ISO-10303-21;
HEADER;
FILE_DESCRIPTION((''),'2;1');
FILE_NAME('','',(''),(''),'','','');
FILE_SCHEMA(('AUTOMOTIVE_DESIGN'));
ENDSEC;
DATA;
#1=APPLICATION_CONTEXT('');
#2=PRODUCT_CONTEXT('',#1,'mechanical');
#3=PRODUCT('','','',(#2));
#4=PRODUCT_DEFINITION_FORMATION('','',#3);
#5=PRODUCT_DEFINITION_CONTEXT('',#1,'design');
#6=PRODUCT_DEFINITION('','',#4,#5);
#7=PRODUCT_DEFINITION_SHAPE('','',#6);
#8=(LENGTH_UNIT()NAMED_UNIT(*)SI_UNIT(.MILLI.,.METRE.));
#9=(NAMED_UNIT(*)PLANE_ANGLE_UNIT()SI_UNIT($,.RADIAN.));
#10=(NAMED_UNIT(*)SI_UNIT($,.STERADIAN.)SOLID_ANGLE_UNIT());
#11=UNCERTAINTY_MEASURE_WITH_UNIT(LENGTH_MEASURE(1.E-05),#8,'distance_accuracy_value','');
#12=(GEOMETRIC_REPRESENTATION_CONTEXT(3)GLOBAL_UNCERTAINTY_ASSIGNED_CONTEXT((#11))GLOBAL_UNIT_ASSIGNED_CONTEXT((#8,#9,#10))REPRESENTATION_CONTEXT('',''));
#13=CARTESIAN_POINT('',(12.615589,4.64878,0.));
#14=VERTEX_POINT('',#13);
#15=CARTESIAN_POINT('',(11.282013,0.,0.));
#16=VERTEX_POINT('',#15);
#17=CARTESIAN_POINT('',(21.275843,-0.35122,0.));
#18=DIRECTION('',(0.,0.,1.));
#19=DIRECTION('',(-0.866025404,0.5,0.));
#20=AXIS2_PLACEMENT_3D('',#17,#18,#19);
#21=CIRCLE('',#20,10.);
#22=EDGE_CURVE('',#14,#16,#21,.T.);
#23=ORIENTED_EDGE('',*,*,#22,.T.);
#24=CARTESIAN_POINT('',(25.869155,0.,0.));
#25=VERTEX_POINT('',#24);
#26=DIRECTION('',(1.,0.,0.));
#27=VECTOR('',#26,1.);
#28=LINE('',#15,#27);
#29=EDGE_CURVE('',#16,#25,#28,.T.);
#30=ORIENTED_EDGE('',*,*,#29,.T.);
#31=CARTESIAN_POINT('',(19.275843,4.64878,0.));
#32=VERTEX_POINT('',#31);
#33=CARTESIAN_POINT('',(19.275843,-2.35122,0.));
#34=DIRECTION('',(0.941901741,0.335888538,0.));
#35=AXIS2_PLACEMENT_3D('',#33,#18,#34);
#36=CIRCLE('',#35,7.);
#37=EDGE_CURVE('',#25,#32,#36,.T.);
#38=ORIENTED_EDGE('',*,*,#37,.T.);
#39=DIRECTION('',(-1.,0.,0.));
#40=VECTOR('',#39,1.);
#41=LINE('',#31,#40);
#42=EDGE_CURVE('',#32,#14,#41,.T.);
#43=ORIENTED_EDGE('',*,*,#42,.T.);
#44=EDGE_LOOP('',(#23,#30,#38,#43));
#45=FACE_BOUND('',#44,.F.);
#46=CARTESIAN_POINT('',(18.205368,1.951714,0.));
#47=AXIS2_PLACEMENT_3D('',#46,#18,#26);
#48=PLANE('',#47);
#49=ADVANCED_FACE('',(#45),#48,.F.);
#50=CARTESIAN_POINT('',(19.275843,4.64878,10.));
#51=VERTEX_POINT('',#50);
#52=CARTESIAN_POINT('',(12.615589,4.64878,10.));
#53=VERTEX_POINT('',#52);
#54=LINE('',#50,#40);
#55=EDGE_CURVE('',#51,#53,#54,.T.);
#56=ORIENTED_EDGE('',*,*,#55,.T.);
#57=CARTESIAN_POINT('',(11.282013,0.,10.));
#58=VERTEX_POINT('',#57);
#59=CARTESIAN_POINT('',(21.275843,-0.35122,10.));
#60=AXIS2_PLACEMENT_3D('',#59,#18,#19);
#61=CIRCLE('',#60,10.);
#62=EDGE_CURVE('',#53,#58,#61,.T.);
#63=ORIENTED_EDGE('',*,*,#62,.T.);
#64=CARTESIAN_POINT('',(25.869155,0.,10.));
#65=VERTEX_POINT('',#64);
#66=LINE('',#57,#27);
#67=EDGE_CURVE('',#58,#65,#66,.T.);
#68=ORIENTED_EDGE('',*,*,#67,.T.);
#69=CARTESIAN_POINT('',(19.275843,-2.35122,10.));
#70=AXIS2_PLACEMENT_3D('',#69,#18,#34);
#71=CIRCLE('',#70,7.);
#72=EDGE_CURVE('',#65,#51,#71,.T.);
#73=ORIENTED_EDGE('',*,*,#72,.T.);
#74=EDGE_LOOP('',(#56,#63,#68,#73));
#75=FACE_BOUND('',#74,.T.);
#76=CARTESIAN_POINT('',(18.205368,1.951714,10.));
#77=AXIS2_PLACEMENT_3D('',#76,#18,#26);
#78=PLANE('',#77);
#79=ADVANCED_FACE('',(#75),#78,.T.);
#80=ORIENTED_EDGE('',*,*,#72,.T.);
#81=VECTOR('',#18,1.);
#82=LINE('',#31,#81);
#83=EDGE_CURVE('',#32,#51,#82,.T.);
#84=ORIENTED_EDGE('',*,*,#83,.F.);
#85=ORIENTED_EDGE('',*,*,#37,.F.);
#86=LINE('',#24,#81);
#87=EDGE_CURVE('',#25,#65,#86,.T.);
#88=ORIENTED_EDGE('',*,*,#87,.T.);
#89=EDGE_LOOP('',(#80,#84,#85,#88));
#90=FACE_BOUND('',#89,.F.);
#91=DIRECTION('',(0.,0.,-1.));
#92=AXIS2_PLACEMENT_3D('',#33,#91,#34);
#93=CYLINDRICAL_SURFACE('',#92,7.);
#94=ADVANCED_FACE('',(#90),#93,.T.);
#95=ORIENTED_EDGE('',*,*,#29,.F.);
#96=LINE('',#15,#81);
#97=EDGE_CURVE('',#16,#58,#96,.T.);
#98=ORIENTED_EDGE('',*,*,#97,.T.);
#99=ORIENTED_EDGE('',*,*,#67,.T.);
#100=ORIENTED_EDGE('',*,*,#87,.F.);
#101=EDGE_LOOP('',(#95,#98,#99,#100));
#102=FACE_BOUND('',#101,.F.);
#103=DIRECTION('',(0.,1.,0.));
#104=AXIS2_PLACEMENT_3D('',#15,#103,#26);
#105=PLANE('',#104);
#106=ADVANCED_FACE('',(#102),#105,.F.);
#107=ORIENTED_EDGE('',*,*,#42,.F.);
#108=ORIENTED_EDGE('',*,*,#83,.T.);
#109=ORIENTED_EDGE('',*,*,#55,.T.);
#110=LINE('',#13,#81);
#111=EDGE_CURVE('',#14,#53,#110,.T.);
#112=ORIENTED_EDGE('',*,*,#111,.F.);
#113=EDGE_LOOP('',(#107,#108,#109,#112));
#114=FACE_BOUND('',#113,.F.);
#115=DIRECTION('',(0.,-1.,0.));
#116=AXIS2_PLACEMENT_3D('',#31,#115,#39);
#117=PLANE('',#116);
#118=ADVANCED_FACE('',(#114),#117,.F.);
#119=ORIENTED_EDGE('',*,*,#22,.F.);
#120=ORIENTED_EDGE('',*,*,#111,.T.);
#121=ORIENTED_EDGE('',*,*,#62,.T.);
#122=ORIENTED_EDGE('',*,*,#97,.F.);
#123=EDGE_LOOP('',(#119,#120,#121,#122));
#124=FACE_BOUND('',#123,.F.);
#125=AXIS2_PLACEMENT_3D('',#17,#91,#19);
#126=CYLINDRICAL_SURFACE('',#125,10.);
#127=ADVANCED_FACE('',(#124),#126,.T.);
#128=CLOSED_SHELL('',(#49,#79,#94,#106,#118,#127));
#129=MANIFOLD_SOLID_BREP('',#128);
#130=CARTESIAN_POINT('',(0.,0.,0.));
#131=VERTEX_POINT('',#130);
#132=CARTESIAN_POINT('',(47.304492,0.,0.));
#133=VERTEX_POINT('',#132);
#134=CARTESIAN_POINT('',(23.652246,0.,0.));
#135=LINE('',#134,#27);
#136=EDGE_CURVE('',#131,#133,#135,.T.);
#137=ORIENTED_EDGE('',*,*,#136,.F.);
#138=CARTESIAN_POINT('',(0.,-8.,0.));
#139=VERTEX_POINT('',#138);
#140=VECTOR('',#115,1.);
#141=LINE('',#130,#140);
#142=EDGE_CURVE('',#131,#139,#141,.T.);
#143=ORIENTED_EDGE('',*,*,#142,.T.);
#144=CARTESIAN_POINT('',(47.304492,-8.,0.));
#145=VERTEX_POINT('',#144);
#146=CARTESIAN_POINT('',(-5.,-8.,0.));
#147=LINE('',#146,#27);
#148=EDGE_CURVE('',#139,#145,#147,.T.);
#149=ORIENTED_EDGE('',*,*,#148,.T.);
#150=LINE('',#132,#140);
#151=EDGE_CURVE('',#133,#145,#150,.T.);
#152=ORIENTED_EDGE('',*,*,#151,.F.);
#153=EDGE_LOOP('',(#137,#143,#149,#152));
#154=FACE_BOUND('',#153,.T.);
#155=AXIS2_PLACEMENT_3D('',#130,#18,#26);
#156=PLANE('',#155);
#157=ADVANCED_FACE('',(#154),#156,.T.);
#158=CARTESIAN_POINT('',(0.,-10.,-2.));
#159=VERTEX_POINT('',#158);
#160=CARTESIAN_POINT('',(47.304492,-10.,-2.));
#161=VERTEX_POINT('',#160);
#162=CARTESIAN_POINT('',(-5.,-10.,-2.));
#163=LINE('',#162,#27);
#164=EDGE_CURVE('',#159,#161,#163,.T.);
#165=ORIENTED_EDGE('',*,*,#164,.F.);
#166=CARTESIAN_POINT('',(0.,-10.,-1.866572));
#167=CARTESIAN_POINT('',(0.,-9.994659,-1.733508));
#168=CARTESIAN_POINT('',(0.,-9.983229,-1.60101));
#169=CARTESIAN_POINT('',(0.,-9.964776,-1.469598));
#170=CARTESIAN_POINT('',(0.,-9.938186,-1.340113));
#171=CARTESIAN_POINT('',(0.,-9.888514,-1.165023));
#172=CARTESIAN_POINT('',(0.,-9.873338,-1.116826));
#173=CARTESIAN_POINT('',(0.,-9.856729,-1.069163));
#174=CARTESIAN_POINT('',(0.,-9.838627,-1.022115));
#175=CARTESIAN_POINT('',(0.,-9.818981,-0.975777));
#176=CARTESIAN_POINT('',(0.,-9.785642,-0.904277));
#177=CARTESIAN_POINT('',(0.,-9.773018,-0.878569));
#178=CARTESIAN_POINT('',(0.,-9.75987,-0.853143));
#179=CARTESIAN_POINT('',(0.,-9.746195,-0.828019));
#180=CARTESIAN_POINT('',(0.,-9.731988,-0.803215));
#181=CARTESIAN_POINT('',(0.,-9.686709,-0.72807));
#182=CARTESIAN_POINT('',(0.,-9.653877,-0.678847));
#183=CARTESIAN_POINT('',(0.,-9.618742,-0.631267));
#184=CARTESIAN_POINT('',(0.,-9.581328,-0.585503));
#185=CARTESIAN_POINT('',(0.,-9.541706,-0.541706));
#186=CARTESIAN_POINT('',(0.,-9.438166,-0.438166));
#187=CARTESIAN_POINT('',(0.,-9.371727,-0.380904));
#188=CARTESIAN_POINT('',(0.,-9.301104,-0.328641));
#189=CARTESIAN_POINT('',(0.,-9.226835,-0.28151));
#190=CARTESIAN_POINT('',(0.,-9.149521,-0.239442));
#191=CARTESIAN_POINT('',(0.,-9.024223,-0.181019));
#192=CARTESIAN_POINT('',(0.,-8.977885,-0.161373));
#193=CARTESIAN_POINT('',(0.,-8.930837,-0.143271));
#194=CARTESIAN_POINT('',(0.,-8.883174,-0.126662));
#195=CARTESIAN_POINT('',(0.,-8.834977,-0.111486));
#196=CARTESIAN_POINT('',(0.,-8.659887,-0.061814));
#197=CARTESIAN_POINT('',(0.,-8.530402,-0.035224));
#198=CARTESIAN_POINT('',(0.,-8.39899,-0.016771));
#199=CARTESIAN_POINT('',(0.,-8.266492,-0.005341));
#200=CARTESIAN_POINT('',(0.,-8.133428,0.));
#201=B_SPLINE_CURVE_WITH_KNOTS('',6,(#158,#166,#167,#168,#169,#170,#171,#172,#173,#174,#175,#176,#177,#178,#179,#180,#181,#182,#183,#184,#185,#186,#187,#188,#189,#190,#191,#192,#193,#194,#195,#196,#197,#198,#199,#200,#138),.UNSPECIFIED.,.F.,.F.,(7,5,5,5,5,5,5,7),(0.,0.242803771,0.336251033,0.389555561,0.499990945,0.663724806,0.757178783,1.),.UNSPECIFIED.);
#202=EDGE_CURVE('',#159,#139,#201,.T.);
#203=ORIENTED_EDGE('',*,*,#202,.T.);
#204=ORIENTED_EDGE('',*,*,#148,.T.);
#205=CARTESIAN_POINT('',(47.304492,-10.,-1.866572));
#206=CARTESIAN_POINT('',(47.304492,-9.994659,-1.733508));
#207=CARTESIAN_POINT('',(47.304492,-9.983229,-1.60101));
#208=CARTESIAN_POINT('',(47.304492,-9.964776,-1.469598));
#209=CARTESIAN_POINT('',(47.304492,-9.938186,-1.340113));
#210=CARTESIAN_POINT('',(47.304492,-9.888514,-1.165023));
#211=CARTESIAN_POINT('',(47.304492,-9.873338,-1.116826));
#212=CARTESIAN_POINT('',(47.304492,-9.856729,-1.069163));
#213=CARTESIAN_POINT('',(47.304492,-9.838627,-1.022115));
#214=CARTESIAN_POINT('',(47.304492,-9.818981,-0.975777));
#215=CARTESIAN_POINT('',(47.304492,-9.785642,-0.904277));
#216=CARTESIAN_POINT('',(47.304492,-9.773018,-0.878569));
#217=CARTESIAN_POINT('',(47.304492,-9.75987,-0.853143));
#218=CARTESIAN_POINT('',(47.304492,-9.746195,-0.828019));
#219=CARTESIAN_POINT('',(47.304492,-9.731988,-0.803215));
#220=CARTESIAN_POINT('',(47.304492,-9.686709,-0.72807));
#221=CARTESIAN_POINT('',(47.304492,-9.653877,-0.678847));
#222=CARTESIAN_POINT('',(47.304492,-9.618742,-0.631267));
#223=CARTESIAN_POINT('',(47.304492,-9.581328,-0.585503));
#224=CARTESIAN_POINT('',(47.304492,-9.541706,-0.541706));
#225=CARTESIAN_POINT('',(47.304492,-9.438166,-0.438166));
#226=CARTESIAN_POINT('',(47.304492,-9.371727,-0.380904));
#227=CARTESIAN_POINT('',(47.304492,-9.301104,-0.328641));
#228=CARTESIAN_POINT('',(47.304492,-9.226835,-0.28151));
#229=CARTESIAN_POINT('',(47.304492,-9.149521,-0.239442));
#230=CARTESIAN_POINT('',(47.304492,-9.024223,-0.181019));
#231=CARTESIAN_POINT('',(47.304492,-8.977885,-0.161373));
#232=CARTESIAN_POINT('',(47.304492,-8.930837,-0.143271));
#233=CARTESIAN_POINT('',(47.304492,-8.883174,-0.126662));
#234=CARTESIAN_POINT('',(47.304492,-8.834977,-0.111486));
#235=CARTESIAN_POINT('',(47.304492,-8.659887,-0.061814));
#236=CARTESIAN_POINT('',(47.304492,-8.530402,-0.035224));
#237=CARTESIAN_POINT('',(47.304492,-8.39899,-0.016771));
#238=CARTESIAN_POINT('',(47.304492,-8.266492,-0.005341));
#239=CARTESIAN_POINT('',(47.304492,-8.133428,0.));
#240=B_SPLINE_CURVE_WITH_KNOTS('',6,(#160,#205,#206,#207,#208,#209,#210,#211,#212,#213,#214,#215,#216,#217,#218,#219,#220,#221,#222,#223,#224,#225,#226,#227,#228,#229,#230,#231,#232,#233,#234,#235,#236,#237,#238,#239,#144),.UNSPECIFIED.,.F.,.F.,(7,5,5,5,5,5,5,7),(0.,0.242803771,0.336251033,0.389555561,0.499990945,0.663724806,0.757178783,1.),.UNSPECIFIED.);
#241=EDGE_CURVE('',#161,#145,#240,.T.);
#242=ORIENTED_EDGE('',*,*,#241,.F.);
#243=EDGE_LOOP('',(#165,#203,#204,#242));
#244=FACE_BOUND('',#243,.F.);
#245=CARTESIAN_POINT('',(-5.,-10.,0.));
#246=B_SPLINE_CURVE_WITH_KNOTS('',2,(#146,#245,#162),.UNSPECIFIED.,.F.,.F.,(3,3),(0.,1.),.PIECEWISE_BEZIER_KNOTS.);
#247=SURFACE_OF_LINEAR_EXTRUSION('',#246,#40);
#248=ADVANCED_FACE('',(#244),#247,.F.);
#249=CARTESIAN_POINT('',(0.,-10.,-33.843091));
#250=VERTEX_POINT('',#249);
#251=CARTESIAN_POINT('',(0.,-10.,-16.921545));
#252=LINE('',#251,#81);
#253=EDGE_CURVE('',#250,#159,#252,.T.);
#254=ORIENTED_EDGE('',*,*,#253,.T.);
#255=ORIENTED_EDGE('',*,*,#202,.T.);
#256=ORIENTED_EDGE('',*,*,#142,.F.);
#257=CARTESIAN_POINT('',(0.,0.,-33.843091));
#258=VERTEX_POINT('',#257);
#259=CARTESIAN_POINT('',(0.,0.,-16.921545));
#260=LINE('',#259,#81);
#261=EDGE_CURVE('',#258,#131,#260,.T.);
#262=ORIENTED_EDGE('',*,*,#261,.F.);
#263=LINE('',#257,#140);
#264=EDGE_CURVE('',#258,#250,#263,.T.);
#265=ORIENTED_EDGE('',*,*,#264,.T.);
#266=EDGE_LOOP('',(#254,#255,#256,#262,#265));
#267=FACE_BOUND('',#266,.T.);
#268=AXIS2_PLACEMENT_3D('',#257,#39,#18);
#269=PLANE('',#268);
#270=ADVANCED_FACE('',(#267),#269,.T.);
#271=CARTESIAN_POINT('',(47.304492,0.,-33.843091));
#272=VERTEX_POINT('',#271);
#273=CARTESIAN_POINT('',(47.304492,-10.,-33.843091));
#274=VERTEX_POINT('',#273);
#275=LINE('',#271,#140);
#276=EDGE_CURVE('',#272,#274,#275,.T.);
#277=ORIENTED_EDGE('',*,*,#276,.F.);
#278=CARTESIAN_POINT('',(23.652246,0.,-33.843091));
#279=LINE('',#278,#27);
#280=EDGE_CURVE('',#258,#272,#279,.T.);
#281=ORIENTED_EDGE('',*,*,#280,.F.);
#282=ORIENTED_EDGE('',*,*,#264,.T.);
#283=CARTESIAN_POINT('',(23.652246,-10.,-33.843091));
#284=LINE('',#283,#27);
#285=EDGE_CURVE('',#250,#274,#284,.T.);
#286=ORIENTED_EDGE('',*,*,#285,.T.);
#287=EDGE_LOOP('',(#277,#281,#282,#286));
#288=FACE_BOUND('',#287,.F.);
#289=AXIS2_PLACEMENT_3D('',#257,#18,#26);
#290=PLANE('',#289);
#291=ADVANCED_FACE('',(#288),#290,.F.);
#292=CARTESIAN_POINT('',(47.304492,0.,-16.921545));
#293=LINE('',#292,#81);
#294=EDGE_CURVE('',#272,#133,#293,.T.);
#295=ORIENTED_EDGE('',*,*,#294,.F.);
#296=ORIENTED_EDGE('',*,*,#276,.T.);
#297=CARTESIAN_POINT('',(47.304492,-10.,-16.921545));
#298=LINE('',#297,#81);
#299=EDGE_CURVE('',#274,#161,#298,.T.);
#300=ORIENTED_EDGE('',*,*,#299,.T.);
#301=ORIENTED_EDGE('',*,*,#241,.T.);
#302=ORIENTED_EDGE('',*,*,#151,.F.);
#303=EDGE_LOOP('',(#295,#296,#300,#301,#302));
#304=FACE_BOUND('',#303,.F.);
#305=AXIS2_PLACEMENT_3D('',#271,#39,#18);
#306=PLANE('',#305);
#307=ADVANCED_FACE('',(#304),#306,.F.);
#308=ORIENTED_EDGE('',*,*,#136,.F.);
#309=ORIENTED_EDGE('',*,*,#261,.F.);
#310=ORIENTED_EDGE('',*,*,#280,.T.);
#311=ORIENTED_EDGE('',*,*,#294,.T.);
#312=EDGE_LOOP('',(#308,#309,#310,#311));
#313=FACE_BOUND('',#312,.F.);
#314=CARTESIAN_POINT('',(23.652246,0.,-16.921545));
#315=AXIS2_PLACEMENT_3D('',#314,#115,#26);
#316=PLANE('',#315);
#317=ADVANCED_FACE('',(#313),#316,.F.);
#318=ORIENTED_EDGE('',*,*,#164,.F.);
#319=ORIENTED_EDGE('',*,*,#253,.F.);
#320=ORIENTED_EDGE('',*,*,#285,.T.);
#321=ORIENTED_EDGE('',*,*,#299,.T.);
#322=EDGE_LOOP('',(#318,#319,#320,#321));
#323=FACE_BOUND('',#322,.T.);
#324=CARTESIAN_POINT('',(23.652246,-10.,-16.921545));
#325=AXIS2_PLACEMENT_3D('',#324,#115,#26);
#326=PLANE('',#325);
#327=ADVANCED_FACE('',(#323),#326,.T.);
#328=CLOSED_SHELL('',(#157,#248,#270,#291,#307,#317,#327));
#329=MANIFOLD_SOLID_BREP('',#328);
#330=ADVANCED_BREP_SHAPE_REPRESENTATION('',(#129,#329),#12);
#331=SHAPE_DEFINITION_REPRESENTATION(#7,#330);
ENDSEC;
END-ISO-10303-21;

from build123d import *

# Parameters (mm, degrees)
F0_W        = 47.3044924438
F0_H        = 33.8430907577
F1_DEPTH    = 10
F3_DEPTH    = 10
F4_T1_DEPTH = 57.3044924438


# Not quite as in the source:
# - a fillet or chamfer that OpenCascade refuses, or shapes differently, is made with other operations: its cross-section is extruded or revolved along the edge and cut away or added


with BuildPart() as f1:
    # F0 (on Front) → F1 (new body)
    with BuildSketch(Plane.XZ):
        with Locations((23.6522462219, -16.9215453789)):
            Rectangle(F0_W, F0_H)
    extrude(amount=F1_DEPTH)

    # F4: fillet of radius 2 on 1 edges, made by hand

    # F4_s2 → F4_t1 (cut)
    with BuildSketch(Plane.YZ.offset(-5)):
        with BuildLine():
            add(Edge.make_bspline(
                [(-8, 0), (-10, 0), (-10, -2)],
                knots=[0, 0, 0, 1, 1, 1], degree=2, weights=[1, 1, 1]))
            Line((-10, -2), (-10, 0))
            Line((-10, 0), (-8, 0))
        make_face()
    extrude(amount=F4_T1_DEPTH, mode=Mode.SUBTRACT)


with BuildPart() as f3:
    # F2 (on face) → F3 (new body)
    with BuildSketch(Plane.XY):
        with BuildLine():
            Line((19.2758429274, 4.6487802366), (12.6155888896, 4.6487802366))
            ThreePointArc((12.6155888896, 4.6487802366), (11.6635328342, 2.4062237394), (11.2820125968, 0))
            Line((11.2820125968, 0), (25.8691551166, 0))
            ThreePointArc((25.8691551166, 0), (23.3095423248, 3.3697302602), (19.2758429274, 4.6487802366))
        make_face()
    extrude(amount=F3_DEPTH)


solid = Compound([f1.part, f3.part])
